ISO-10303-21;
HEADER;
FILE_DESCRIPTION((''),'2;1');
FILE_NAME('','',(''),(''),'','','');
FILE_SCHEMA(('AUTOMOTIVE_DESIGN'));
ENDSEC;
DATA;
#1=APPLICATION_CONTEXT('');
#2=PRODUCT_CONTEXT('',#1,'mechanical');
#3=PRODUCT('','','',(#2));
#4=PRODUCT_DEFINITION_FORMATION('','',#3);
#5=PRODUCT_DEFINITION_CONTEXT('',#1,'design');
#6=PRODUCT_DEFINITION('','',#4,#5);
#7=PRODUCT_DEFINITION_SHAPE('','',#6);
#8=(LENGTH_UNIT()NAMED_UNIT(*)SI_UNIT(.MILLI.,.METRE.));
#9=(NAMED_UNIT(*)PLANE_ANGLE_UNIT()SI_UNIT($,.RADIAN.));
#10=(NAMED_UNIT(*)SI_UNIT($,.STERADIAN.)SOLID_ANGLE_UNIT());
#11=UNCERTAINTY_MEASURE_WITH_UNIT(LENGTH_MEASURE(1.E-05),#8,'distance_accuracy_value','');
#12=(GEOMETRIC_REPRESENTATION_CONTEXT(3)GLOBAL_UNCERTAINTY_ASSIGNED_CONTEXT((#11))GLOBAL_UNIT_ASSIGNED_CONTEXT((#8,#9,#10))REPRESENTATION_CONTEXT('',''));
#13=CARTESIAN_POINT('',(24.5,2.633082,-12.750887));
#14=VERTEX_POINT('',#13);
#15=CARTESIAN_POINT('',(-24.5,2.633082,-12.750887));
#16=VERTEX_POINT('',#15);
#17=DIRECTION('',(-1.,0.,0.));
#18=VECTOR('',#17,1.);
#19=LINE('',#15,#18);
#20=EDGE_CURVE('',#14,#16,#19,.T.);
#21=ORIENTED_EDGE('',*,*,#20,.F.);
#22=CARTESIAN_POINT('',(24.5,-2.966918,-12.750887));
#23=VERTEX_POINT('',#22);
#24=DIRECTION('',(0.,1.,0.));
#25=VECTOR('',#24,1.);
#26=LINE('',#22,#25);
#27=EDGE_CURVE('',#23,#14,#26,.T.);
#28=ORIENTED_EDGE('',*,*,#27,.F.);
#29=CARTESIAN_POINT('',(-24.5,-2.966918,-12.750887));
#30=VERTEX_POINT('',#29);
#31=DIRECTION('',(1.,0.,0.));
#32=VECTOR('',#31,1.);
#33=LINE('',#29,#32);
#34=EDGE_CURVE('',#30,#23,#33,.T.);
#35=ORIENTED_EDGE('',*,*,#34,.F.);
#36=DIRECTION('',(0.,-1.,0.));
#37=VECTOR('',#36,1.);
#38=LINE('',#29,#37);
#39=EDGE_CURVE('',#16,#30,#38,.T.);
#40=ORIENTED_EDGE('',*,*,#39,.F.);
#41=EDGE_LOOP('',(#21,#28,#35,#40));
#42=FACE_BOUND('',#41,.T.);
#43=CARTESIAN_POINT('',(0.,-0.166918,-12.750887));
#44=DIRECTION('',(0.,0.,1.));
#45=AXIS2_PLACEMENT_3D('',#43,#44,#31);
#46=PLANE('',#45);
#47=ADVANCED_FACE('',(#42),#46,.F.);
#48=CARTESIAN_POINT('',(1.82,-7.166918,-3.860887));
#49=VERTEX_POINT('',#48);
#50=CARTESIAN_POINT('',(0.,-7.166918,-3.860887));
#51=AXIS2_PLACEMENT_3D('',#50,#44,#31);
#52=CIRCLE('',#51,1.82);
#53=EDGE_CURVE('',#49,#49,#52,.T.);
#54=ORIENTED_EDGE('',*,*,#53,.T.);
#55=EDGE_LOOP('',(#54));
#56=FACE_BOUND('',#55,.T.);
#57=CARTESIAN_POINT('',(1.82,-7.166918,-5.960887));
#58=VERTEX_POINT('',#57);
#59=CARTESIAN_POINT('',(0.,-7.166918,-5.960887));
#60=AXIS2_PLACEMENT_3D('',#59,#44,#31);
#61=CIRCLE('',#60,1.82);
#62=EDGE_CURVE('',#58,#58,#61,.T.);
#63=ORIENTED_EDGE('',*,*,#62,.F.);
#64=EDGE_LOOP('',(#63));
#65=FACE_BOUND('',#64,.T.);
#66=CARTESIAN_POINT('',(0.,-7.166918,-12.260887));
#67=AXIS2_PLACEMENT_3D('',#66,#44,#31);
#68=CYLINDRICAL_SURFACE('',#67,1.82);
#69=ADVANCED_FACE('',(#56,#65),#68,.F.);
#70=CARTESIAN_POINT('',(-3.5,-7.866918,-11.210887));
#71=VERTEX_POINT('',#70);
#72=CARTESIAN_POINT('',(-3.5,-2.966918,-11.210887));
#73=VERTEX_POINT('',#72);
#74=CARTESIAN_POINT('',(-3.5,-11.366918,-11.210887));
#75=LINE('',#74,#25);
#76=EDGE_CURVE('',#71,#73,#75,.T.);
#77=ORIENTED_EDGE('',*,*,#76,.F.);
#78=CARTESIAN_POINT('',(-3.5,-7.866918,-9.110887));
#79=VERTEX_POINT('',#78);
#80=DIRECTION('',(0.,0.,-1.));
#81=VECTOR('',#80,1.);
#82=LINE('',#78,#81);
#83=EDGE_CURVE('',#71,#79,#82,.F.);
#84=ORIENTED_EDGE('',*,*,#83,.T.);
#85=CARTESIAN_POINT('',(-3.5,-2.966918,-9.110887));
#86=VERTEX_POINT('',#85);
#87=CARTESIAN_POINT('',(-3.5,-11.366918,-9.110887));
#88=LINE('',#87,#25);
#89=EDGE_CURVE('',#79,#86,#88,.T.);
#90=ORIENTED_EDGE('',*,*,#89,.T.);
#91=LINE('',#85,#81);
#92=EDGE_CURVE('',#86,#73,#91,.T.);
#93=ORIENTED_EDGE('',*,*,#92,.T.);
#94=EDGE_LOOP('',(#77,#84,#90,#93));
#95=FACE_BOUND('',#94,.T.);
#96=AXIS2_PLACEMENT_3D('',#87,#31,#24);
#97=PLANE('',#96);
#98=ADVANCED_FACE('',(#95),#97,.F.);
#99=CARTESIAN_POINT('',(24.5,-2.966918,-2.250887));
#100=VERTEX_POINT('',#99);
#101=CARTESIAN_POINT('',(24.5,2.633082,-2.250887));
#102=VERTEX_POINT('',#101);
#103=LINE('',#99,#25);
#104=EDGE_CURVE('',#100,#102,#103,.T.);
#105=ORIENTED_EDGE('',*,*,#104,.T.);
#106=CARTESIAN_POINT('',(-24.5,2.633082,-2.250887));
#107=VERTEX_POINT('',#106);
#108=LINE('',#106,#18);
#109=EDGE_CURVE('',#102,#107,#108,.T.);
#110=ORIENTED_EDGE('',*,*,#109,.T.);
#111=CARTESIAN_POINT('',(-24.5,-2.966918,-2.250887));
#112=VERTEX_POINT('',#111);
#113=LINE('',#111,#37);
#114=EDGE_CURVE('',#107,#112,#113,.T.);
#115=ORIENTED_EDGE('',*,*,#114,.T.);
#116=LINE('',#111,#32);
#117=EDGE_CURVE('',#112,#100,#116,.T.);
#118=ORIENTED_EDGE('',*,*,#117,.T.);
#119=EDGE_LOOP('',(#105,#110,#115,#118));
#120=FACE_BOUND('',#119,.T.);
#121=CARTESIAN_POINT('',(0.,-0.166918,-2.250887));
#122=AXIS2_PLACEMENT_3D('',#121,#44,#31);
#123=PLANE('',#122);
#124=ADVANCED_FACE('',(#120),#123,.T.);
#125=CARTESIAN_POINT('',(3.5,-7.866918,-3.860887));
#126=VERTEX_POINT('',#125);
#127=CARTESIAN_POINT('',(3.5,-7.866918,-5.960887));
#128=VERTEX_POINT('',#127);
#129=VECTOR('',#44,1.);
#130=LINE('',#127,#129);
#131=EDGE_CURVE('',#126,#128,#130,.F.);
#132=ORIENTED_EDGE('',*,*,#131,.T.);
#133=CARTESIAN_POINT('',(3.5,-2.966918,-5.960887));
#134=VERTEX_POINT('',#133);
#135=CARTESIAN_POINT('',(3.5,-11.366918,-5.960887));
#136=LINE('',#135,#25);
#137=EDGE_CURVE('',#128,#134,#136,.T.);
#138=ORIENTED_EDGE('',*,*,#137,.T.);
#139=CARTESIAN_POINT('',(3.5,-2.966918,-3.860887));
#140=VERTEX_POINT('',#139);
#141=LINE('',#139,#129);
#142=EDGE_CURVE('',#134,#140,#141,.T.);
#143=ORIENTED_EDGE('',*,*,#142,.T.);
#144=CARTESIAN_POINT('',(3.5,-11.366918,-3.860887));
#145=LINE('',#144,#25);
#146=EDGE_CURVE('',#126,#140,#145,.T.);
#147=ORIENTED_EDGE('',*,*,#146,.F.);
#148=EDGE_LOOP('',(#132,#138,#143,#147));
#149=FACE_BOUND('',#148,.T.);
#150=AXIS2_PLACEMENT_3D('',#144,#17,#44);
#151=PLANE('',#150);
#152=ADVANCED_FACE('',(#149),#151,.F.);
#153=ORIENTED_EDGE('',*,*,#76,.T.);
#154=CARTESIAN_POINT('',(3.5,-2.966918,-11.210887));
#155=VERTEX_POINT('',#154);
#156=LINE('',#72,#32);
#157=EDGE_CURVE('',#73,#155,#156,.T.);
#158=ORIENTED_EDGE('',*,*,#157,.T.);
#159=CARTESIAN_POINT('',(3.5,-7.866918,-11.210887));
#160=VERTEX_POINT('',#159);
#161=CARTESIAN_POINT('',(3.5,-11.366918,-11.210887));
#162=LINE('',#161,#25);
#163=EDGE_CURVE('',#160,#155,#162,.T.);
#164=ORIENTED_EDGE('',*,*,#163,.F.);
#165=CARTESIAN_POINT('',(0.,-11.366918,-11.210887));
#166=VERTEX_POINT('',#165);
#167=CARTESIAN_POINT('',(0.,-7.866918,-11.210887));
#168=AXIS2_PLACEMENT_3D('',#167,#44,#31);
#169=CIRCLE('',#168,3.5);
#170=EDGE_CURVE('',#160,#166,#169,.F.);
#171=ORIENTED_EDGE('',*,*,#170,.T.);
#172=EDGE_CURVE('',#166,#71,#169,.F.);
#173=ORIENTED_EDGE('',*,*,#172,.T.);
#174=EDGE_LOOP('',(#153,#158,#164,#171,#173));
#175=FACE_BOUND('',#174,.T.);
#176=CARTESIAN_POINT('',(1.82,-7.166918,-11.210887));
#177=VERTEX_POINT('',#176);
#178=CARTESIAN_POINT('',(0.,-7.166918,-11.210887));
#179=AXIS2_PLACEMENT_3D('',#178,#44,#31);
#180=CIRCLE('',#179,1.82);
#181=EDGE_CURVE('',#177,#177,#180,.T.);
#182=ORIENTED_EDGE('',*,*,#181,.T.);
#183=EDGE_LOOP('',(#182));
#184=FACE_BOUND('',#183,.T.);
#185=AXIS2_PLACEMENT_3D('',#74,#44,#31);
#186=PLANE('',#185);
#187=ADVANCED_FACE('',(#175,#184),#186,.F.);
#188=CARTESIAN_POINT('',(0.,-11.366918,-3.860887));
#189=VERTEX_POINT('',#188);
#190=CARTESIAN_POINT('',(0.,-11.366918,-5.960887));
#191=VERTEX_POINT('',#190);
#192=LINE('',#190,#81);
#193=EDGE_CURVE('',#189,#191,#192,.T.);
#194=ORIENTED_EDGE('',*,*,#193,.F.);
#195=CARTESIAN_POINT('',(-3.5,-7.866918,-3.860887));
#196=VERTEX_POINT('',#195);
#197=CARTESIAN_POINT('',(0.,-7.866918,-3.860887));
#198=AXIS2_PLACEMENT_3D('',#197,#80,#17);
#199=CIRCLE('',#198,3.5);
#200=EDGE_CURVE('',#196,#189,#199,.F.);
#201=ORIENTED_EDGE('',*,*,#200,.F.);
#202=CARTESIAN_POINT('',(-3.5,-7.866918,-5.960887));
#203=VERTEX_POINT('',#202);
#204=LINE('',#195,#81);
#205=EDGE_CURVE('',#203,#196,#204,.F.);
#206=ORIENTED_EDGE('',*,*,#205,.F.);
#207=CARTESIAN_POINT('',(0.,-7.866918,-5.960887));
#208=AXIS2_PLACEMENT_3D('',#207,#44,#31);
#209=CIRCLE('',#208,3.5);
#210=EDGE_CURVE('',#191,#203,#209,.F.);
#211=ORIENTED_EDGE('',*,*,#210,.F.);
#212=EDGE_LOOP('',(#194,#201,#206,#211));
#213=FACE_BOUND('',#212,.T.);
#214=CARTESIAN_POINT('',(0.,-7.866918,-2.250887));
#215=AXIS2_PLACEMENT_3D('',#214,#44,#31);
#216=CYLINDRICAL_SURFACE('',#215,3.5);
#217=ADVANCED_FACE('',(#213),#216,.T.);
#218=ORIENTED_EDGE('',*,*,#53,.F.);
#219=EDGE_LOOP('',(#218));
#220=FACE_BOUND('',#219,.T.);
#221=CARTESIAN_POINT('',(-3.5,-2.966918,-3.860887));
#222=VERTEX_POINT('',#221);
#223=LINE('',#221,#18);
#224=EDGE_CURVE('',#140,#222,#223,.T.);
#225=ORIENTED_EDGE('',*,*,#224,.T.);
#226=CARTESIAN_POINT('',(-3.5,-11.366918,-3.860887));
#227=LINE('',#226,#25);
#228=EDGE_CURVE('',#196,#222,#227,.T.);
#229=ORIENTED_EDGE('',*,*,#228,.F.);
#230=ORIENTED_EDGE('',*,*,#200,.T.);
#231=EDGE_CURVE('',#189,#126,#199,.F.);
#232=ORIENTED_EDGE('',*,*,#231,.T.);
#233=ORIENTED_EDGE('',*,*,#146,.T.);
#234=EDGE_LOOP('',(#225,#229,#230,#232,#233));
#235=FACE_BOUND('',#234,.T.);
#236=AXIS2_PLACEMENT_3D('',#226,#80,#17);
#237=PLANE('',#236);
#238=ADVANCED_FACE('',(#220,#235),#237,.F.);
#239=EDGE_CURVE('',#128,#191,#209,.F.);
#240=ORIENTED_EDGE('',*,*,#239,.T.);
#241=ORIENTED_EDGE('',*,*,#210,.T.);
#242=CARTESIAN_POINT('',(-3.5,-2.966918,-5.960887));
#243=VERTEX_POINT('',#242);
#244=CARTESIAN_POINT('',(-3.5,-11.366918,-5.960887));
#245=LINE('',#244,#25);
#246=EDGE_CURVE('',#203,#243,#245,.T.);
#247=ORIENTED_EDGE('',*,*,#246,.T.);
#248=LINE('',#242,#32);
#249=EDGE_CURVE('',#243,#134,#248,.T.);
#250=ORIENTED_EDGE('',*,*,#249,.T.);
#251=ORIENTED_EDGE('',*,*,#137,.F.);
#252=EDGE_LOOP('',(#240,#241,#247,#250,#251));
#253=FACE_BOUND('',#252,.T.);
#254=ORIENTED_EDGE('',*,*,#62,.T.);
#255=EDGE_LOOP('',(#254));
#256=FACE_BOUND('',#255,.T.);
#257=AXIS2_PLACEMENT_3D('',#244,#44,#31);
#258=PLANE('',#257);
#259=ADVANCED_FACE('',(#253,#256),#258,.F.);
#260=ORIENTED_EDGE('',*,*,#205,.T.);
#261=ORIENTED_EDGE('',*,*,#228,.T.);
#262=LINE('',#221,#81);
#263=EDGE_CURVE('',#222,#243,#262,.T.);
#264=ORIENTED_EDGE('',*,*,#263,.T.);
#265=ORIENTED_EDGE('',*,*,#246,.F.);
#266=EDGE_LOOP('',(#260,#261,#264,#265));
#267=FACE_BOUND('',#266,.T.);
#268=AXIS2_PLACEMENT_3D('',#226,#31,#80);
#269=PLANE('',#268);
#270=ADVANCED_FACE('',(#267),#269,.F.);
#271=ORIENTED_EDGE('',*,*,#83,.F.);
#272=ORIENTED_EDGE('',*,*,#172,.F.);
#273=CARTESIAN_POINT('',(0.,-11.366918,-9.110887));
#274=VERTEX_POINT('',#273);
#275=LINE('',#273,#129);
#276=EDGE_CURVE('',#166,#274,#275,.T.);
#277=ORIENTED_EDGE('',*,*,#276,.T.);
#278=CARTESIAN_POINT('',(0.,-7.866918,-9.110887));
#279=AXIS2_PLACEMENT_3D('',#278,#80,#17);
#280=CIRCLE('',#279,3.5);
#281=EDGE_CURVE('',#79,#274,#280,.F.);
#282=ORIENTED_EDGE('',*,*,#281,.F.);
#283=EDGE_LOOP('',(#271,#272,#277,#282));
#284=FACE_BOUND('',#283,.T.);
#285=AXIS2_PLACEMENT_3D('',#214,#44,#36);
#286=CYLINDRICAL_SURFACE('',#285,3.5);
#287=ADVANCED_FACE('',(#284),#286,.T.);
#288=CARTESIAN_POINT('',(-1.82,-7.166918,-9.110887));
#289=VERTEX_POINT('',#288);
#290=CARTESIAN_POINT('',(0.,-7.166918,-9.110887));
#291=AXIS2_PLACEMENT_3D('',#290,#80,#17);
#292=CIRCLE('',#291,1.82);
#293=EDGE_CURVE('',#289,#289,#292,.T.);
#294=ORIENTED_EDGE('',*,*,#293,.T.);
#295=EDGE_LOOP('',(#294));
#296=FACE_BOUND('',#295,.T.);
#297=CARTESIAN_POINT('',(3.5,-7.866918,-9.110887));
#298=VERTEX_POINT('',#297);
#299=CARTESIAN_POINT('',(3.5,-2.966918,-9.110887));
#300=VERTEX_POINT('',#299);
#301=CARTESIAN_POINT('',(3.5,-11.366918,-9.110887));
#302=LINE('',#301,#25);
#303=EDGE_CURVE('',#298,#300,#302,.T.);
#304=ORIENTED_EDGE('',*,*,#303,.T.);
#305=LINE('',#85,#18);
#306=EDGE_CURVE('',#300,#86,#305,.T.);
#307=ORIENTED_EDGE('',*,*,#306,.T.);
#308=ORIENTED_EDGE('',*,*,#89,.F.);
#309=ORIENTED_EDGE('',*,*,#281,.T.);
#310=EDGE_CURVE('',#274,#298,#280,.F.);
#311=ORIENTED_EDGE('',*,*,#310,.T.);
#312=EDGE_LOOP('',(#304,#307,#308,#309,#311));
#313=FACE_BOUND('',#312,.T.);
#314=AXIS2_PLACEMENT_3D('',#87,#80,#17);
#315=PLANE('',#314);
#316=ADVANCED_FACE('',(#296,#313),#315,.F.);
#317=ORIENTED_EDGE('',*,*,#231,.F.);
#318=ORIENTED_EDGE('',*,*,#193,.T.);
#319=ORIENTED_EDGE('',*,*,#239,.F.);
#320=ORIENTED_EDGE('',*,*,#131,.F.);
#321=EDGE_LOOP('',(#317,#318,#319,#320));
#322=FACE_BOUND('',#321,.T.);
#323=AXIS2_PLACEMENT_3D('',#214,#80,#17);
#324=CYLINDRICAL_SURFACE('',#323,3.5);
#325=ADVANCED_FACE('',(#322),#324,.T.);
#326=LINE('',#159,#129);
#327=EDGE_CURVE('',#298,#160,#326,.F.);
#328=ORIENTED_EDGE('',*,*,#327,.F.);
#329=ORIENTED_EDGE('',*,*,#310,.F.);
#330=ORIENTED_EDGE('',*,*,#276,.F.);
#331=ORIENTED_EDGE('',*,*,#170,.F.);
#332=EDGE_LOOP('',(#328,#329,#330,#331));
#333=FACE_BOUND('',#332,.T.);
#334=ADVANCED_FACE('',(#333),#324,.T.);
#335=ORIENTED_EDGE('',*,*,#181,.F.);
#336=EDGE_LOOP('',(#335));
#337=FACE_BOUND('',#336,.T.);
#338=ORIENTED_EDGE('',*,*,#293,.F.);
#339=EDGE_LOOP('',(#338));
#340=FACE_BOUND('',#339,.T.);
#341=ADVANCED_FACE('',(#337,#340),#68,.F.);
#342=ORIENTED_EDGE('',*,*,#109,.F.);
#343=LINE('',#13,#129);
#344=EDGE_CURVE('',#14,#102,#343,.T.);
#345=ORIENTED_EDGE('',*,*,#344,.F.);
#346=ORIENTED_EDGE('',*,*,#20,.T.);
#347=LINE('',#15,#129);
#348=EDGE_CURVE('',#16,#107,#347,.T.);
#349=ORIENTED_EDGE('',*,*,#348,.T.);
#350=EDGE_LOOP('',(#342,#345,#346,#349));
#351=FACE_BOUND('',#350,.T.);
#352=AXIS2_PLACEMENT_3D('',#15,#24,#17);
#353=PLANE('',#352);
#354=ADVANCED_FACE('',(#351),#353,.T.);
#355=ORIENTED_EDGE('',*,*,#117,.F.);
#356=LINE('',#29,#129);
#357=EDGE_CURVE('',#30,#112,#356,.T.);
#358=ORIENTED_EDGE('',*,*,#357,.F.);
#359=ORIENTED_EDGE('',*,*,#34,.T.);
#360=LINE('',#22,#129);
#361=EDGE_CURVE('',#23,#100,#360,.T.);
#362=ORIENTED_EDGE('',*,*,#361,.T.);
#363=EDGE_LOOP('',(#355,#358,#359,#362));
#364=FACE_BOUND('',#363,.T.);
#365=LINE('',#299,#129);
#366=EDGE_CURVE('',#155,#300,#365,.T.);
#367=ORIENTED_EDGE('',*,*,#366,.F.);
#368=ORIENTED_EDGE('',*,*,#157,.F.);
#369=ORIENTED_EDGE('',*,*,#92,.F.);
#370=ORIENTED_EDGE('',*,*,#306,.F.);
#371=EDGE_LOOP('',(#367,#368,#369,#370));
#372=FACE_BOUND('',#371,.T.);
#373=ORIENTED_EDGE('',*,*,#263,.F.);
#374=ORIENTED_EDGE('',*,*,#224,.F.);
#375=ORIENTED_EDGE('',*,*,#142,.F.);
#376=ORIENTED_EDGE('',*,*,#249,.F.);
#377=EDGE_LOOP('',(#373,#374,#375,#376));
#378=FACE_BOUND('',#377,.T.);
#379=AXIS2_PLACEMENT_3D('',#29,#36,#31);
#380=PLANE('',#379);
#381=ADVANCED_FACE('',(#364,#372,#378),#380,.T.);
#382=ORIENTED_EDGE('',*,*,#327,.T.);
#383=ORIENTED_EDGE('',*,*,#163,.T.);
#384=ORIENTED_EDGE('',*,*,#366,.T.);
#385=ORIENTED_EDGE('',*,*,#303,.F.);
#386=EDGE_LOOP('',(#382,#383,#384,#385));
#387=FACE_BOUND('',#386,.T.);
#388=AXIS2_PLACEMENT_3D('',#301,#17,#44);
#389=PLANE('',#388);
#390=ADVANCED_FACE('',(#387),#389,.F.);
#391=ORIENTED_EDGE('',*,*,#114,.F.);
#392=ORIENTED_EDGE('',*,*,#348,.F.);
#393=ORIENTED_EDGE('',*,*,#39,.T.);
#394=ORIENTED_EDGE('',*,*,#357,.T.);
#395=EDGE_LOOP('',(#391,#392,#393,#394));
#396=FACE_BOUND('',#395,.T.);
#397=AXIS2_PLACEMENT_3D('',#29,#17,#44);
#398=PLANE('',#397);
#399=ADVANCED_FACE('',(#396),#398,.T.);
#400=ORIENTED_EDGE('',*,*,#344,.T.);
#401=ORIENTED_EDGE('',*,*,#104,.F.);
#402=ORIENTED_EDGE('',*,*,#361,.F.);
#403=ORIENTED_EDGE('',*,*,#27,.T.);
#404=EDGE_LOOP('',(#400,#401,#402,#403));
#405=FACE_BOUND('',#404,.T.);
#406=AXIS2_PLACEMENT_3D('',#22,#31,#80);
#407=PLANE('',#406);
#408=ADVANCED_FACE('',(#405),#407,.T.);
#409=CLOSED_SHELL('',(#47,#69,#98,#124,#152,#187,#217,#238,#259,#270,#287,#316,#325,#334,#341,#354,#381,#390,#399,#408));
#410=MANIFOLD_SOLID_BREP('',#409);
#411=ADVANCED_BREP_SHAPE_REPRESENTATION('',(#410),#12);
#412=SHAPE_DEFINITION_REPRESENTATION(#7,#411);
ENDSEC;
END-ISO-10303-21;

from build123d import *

# Parameters (mm, degrees)
SKETCH1_W           = 8
SKETCH1_H           = 70
BOSS_EXTRUDE1_DEPTH = 15
SKETCH2_W           = 10
SKETCH2_H           = 3
BOSS_EXTRUDE2_DEPTH = 12
SKETCH3_R           = 2.6
CUT_EXTRUDE1_DEPTH  = 12
FILLET1_R           = 5
SCALE1_SCALE        = 0.7


with BuildPart() as part:
    # Sketch1 → Boss-Extrude1 (new body)
    with BuildSketch(Plane(origin=(0, 0, 0), x_dir=(0, 1, 0), z_dir=(0, 0, 1))):
        Rectangle(SKETCH1_W, SKETCH1_H)
    extrude(amount=-BOSS_EXTRUDE1_DEPTH)

    # Sketch2 → Boss-Extrude2 (add)
    with BuildSketch(Plane.XZ.offset(4)):
        with Locations((0, -3.8)):
            Rectangle(SKETCH2_W, SKETCH2_H)
        with Locations((0, -11.3)):
            Rectangle(SKETCH2_W, SKETCH2_H)
    extrude(amount=BOSS_EXTRUDE2_DEPTH)

    # Sketch3 → Cut-Extrude1 (cut)
    with BuildSketch(Plane.XY.offset(-2.3)):
        with Locations((0, -10)):
            Circle(SKETCH3_R)
    extrude(amount=-CUT_EXTRUDE1_DEPTH, mode=Mode.SUBTRACT)

    # Fillet1
    fillet1_edges = [part.edges().sort_by_distance(p)[0] for p in [
        (-5, -16, -11.3),
        (5, -16, -11.3),
        (5, -16, -3.8),
        (-5, -16, -3.8),
    ]]
    fillet(fillet1_edges, radius=FILLET1_R - 0.0001)  # a hair under: the kernel refuses the full size


with BuildPart() as part_1:
    # Scale1: scaled about (0, -0.556396742, -7.502958038)
    add(part.part.scale(SCALE1_SCALE).moved(Location((0, -0.166919023, -2.250887411))))


solid = part_1.part
